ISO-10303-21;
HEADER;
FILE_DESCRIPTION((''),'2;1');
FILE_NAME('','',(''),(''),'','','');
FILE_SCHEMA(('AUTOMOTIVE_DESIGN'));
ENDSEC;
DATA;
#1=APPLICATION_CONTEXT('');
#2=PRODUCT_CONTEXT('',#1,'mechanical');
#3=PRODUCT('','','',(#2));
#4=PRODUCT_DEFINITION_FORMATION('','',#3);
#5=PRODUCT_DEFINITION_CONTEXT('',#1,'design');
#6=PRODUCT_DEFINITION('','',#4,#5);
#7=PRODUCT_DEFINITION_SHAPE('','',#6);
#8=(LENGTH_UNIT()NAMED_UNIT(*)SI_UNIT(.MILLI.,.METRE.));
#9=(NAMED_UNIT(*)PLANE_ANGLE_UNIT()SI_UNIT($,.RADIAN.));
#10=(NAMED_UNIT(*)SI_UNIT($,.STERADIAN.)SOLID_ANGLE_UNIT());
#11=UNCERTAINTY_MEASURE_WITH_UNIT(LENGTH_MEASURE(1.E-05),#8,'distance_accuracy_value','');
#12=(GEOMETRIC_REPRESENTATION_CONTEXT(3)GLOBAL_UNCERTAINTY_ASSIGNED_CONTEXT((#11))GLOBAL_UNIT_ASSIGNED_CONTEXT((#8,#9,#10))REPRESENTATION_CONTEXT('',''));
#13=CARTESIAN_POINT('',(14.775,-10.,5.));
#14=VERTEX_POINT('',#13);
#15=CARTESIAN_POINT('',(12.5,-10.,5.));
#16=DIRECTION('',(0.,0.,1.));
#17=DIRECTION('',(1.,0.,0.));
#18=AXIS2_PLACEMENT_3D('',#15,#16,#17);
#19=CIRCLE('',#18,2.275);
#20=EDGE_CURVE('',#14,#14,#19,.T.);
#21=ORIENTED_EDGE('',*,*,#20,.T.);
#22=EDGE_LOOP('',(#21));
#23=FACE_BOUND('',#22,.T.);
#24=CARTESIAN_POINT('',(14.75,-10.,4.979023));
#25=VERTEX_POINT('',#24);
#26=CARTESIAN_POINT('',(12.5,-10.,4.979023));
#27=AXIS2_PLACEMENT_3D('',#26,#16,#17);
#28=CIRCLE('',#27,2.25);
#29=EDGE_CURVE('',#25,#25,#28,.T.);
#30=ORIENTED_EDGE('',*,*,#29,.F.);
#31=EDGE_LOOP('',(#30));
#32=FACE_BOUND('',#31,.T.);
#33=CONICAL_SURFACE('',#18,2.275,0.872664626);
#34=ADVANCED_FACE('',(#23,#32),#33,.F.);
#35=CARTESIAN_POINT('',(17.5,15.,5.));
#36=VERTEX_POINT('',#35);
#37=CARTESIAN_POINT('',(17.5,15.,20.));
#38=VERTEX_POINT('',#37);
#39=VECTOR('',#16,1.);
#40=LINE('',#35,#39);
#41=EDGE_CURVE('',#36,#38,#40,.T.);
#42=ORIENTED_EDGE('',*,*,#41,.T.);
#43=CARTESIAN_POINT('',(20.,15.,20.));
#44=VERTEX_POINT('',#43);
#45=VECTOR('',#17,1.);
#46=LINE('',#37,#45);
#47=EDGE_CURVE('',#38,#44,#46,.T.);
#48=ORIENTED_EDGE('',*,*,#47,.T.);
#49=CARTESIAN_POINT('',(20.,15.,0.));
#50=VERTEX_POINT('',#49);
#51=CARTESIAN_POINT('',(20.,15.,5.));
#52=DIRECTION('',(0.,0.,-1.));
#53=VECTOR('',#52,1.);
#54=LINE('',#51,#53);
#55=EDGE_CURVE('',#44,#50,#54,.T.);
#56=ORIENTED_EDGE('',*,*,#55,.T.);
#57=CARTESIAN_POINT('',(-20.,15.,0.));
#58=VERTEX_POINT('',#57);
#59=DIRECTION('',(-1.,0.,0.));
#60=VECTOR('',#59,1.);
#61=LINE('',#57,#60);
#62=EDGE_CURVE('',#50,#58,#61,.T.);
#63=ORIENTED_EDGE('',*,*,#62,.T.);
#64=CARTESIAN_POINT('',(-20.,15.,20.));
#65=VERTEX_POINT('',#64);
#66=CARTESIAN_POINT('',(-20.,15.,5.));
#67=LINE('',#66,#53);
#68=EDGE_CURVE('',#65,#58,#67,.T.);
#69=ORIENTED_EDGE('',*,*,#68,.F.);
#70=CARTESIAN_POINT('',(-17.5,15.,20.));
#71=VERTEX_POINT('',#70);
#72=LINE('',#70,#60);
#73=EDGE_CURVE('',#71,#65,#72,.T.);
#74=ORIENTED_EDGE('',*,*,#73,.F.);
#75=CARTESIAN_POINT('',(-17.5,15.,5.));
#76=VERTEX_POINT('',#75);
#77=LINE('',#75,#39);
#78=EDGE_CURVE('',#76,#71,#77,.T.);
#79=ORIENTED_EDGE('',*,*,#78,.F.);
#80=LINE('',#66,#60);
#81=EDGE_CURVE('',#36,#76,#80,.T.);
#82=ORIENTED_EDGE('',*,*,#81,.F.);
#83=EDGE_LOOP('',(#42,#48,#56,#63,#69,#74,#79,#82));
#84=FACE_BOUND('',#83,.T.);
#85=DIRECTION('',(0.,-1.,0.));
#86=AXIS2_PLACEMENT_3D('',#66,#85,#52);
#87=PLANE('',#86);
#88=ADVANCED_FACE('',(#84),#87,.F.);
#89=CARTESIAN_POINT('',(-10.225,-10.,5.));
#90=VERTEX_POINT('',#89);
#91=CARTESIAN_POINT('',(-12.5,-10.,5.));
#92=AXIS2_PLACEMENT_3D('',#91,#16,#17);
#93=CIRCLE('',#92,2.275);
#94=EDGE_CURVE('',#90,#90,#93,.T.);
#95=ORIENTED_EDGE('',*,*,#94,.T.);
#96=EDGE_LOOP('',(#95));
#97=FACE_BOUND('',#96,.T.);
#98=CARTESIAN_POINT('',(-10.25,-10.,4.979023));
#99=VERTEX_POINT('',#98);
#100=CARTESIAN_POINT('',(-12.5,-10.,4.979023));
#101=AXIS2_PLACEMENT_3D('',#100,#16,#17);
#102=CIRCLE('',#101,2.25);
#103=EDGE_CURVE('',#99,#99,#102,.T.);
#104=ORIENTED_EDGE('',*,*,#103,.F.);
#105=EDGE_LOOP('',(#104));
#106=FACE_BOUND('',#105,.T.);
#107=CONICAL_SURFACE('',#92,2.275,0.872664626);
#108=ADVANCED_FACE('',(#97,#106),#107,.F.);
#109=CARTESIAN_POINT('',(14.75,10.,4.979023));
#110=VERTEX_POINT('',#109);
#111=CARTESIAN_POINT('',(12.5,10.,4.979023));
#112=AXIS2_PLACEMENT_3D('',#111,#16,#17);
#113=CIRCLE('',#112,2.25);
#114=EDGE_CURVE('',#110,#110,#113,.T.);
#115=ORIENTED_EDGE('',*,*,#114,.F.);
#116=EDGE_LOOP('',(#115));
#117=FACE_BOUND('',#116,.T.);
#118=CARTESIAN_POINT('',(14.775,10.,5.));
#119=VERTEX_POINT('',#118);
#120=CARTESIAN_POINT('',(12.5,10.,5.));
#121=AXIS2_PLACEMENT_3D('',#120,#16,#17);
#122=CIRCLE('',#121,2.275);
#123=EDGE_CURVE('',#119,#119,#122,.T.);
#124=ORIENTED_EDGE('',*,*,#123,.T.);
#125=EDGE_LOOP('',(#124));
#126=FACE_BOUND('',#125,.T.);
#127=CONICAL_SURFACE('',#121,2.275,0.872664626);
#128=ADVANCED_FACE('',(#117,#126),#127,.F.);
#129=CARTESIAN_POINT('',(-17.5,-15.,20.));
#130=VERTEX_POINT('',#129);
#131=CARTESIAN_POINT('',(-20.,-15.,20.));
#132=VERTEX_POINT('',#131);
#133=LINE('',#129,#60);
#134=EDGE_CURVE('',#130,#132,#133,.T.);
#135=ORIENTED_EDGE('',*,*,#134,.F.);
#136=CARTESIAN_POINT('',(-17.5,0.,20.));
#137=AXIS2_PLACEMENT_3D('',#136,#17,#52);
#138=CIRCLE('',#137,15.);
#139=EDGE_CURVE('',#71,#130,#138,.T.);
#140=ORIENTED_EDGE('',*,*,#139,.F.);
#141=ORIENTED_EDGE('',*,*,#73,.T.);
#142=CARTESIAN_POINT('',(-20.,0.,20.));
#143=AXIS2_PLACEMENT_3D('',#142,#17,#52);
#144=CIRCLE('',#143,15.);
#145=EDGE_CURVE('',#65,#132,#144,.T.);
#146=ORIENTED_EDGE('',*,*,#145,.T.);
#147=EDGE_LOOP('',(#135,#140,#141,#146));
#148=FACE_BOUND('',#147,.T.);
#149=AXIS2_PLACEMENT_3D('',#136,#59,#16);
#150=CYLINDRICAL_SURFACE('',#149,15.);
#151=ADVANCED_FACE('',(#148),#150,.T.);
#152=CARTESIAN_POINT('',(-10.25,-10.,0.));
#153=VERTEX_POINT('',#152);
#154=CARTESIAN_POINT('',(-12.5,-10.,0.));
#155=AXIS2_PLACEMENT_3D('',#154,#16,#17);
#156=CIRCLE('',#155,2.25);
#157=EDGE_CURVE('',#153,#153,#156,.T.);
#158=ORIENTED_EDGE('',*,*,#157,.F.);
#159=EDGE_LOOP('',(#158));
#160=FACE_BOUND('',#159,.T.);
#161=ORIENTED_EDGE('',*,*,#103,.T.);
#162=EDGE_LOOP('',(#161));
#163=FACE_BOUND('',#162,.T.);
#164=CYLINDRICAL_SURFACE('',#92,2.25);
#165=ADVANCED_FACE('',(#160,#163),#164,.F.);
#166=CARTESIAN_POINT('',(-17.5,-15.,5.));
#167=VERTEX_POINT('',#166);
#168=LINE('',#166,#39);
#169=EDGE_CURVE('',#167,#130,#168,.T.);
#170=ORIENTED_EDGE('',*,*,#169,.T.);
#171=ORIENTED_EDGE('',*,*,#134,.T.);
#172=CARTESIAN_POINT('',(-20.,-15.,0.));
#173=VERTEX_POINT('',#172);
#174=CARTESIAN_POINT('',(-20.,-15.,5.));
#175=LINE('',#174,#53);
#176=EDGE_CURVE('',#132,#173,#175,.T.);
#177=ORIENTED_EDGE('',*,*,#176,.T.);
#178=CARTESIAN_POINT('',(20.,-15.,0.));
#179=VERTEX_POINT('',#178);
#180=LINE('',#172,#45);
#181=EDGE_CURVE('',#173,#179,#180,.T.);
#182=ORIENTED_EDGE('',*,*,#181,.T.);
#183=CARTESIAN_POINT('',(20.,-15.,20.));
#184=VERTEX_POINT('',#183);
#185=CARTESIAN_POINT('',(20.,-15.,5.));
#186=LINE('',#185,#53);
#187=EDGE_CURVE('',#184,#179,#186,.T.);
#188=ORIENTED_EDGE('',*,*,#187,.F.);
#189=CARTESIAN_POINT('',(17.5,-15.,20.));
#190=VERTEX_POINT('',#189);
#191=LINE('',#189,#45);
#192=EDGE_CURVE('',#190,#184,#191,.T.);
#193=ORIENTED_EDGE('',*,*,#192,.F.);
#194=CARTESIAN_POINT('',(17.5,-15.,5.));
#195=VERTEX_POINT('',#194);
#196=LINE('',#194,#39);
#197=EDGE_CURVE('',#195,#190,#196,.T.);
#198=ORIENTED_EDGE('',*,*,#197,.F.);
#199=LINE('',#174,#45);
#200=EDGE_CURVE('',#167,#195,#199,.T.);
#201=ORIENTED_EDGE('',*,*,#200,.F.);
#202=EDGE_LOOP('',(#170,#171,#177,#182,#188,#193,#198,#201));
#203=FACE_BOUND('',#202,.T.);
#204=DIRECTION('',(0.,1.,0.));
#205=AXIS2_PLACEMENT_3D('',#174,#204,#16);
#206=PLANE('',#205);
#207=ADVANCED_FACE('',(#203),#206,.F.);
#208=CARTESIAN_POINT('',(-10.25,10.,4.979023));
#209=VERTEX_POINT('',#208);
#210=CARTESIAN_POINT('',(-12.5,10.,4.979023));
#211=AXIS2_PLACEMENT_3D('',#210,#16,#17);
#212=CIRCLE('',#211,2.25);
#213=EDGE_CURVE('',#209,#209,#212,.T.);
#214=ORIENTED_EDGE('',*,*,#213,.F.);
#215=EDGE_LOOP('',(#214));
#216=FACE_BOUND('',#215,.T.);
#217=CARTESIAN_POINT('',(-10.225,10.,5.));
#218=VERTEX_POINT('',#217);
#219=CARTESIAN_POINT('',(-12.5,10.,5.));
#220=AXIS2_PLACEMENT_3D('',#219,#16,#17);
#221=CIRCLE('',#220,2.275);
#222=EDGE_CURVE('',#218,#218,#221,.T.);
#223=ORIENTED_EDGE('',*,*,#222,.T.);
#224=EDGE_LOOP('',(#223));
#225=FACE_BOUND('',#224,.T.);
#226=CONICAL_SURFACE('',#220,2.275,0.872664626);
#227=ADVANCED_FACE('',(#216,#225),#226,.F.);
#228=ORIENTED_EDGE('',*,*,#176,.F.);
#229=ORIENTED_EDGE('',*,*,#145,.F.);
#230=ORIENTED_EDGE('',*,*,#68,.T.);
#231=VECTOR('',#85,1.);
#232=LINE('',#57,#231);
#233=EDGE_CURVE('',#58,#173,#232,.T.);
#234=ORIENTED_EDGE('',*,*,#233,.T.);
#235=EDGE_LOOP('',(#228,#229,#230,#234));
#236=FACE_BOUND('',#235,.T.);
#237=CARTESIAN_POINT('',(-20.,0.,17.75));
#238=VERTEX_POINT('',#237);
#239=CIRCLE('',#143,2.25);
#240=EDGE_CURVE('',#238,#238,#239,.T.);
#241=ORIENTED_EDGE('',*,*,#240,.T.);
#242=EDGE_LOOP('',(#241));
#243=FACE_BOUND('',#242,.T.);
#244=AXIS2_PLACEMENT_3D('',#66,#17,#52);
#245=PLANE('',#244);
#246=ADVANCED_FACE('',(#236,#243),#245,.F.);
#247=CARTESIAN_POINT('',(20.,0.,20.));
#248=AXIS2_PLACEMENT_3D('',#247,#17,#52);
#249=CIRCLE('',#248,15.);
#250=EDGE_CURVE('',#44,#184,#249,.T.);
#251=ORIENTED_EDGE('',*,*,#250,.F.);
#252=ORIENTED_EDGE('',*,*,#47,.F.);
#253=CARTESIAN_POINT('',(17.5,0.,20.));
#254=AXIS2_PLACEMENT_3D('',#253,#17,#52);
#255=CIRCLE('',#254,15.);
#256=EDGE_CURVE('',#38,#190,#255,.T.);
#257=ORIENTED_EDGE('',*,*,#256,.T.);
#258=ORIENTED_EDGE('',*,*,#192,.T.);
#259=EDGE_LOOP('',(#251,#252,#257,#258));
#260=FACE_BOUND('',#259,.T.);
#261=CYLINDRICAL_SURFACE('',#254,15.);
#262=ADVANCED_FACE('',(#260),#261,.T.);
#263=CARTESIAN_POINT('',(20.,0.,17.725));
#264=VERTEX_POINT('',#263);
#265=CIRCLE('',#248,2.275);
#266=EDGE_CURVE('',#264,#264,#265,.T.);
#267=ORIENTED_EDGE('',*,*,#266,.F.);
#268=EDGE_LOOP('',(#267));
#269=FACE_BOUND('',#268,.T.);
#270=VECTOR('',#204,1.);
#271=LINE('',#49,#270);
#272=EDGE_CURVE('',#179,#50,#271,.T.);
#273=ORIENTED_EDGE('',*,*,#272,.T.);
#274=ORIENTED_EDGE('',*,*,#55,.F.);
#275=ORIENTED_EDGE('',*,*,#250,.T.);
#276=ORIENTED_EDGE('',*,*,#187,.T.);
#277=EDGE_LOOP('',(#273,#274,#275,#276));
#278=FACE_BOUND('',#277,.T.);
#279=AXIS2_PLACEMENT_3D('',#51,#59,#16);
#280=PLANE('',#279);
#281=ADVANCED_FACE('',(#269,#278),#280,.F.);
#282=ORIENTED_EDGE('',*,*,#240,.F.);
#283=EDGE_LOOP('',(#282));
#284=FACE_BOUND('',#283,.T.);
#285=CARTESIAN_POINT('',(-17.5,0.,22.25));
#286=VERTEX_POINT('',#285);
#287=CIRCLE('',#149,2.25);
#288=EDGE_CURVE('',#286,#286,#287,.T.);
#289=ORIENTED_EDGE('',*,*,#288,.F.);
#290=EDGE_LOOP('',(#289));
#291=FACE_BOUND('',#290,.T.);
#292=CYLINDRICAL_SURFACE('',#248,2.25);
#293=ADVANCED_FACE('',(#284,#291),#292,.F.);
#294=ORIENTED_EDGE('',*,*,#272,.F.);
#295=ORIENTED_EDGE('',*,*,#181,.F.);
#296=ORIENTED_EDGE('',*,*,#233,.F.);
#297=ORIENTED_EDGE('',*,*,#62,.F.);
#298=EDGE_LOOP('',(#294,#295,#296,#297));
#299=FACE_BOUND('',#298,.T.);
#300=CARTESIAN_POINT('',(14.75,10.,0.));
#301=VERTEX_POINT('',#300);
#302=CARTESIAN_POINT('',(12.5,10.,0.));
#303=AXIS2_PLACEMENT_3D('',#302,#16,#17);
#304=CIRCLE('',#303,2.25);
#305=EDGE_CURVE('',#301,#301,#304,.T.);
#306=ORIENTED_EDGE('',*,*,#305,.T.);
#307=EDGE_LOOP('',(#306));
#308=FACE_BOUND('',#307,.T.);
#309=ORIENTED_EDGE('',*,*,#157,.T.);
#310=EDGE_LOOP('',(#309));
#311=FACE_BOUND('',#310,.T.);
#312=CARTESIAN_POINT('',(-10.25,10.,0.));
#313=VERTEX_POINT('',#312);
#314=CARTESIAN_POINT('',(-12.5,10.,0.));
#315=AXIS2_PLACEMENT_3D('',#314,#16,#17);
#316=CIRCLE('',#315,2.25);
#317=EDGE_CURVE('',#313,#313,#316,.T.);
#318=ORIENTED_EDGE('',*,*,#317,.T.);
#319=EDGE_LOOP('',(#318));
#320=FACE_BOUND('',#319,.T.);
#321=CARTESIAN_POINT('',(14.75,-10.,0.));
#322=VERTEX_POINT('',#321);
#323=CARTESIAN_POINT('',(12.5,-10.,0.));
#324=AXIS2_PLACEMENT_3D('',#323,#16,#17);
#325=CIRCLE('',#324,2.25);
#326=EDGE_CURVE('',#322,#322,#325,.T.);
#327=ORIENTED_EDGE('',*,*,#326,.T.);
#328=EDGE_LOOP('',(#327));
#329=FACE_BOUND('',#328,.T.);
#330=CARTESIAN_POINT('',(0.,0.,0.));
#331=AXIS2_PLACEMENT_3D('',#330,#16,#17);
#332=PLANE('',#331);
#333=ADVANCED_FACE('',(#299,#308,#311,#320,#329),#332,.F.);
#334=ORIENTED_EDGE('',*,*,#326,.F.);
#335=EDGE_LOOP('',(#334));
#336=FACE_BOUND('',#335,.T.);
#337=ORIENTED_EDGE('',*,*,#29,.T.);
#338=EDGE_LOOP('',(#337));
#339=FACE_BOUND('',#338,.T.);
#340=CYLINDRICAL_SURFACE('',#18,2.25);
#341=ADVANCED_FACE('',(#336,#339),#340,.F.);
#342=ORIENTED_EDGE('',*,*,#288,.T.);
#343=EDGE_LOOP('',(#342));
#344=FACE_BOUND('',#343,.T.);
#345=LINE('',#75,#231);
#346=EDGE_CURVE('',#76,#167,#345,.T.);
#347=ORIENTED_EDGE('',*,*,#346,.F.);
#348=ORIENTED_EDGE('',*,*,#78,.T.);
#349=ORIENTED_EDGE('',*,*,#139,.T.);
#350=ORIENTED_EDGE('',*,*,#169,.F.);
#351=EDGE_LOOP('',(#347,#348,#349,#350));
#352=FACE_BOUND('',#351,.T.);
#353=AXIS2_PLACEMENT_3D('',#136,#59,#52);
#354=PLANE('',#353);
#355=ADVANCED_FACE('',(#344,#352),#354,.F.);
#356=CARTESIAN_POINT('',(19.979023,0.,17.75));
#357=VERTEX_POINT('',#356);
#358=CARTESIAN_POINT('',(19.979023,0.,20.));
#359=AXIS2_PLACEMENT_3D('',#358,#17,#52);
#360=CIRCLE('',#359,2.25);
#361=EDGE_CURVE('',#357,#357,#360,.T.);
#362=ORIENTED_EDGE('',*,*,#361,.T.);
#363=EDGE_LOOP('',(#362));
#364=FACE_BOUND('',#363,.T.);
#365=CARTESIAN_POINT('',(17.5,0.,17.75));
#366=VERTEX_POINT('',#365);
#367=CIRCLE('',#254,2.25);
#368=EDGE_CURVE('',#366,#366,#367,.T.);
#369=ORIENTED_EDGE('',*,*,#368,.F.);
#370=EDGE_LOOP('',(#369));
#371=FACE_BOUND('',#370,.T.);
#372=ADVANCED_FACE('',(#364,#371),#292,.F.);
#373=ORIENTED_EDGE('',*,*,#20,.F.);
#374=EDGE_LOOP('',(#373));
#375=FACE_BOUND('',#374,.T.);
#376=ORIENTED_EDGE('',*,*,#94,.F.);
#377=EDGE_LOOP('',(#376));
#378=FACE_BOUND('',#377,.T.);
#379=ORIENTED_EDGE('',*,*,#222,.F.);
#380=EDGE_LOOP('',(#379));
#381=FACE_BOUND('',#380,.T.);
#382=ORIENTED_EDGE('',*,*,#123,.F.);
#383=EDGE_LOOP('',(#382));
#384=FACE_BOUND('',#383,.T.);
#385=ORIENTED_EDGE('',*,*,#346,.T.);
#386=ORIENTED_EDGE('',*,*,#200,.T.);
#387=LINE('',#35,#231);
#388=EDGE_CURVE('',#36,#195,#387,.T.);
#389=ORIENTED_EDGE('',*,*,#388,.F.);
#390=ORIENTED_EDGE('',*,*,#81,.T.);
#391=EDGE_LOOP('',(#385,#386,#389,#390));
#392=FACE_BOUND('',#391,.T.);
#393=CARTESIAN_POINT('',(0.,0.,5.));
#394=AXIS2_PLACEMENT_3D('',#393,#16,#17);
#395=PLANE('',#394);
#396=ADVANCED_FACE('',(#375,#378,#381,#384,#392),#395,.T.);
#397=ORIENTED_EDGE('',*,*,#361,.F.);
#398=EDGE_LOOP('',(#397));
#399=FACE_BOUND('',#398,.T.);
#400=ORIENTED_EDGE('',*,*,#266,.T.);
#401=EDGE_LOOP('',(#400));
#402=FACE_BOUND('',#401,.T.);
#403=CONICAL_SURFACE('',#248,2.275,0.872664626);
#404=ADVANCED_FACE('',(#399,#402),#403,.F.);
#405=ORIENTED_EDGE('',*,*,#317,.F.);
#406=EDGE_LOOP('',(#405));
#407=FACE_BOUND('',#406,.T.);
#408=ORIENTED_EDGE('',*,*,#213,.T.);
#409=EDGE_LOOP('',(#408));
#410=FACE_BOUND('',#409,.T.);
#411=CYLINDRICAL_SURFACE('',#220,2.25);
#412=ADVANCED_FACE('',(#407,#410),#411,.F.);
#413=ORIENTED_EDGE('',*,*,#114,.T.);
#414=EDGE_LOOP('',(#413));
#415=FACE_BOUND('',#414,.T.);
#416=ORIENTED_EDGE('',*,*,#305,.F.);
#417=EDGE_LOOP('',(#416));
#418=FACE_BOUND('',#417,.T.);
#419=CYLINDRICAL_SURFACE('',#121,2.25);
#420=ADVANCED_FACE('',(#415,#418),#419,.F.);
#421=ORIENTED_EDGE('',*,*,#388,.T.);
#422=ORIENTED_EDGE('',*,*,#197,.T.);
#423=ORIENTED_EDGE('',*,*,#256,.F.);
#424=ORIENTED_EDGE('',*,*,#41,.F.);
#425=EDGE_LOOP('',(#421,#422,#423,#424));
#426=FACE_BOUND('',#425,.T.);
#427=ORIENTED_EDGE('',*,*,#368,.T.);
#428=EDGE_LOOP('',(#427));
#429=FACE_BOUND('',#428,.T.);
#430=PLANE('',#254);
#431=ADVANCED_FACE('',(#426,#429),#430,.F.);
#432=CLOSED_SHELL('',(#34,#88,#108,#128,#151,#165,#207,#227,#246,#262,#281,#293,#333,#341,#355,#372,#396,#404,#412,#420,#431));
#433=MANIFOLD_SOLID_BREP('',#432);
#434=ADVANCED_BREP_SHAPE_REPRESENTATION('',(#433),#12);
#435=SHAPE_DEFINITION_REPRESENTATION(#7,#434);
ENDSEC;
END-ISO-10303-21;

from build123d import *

# Parameters (mm, degrees)
SKETCH1_W                      = 40
SKETCH1_H                      = 30
BOSS_EXTRUDE1_DEPTH            = 5
BOSS_EXTRUDE2_DEPTH            = 2.5
M4_CLEARANCE_HOLE2_D           = 4.5
M4_CLEARANCE_HOLE2_CSINK_D     = 4.55
M4_CLEARANCE_HOLE2_CSINK_ANGLE = 100


# Read off the part's stored shape, not the designer's step: M4 Clearance Hole1
with BuildPart() as part:
    # Sketch1 → Boss-Extrude1 (new body)
    with BuildSketch(Plane.XY):
        Rectangle(SKETCH1_W, SKETCH1_H)
    extrude(amount=BOSS_EXTRUDE1_DEPTH)

    # Sketch2 → Boss-Extrude2 (add)
    with BuildSketch(Plane(origin=(20, 0, 0), x_dir=(0, 0, -1), z_dir=(1, 0, 0))):
        with BuildLine():
            Line((-5, -15), (-5, 15))
            Line((-5, 15), (-20, 15))
            ThreePointArc((-20, 15), (-35, 0), (-20, -15))
            Line((-20, -15), (-5, -15))
        make_face()
    boss_extrude2 = extrude(amount=-BOSS_EXTRUDE2_DEPTH)

    # Mirror1: Boss-Extrude2 across plane
    add(boss_extrude2.mirror(Plane(origin=(0, 0, 0), x_dir=(0, 0, 1), z_dir=(1, 0, 0))))

    # M4 Clearance Hole1 outline → M4 Clearance Hole1 (revolve, cut)
    with BuildSketch(Plane(origin=(12.5, 10, 0), x_dir=(1, 0, 0), z_dir=(0, -1, 0))):
        Polygon((0, 0), (2.25, 0), (2.25, 4.979022509), (2.275, 5), (0, 5), align=None)
    revolve(axis=Axis((12.5, 10, 0), (0, 0, 1)), mode=Mode.SUBTRACT)

    # M4 Clearance Hole1 2 outline → M4 Clearance Hole1 2 (revolve, cut)
    with BuildSketch(Plane(origin=(-12.5, -10, 0), x_dir=(1, 0, 0), z_dir=(0, -1, 0))):
        Polygon((0, 0), (2.25, 0), (2.25, 4.979022509), (2.275, 5), (0, 5), align=None)
    revolve(axis=Axis((-12.5, -10, 0), (0, 0, 1)), mode=Mode.SUBTRACT)

    # M4 Clearance Hole1 3 outline → M4 Clearance Hole1 3 (revolve, cut)
    with BuildSketch(Plane(origin=(12.5, -10, 0), x_dir=(1, 0, 0), z_dir=(0, -1, 0))):
        Polygon((0, 0), (2.25, 0), (2.25, 4.979022509), (2.275, 5), (0, 5), align=None)
    revolve(axis=Axis((12.5, -10, 0), (0, 0, 1)), mode=Mode.SUBTRACT)

    # M4 Clearance Hole1 4 outline → M4 Clearance Hole1 4 (revolve, cut)
    with BuildSketch(Plane(origin=(-12.5, 10, 0), x_dir=(1, 0, 0), z_dir=(0, -1, 0))):
        Polygon((0, 0), (2.25, 0), (2.25, 4.979022509), (2.275, 5), (0, 5), align=None)
    revolve(axis=Axis((-12.5, 10, 0), (0, 0, 1)), mode=Mode.SUBTRACT)

    # M4 Clearance Hole2 (through all)
    with Locations(Plane(origin=(20, 0, 0), x_dir=(0, 0, -1), z_dir=(1, 0, 0))):
        with Locations((-20, 0)):
            CounterSinkHole(M4_CLEARANCE_HOLE2_D / 2, M4_CLEARANCE_HOLE2_CSINK_D / 2, counter_sink_angle=M4_CLEARANCE_HOLE2_CSINK_ANGLE)


solid = part.part
